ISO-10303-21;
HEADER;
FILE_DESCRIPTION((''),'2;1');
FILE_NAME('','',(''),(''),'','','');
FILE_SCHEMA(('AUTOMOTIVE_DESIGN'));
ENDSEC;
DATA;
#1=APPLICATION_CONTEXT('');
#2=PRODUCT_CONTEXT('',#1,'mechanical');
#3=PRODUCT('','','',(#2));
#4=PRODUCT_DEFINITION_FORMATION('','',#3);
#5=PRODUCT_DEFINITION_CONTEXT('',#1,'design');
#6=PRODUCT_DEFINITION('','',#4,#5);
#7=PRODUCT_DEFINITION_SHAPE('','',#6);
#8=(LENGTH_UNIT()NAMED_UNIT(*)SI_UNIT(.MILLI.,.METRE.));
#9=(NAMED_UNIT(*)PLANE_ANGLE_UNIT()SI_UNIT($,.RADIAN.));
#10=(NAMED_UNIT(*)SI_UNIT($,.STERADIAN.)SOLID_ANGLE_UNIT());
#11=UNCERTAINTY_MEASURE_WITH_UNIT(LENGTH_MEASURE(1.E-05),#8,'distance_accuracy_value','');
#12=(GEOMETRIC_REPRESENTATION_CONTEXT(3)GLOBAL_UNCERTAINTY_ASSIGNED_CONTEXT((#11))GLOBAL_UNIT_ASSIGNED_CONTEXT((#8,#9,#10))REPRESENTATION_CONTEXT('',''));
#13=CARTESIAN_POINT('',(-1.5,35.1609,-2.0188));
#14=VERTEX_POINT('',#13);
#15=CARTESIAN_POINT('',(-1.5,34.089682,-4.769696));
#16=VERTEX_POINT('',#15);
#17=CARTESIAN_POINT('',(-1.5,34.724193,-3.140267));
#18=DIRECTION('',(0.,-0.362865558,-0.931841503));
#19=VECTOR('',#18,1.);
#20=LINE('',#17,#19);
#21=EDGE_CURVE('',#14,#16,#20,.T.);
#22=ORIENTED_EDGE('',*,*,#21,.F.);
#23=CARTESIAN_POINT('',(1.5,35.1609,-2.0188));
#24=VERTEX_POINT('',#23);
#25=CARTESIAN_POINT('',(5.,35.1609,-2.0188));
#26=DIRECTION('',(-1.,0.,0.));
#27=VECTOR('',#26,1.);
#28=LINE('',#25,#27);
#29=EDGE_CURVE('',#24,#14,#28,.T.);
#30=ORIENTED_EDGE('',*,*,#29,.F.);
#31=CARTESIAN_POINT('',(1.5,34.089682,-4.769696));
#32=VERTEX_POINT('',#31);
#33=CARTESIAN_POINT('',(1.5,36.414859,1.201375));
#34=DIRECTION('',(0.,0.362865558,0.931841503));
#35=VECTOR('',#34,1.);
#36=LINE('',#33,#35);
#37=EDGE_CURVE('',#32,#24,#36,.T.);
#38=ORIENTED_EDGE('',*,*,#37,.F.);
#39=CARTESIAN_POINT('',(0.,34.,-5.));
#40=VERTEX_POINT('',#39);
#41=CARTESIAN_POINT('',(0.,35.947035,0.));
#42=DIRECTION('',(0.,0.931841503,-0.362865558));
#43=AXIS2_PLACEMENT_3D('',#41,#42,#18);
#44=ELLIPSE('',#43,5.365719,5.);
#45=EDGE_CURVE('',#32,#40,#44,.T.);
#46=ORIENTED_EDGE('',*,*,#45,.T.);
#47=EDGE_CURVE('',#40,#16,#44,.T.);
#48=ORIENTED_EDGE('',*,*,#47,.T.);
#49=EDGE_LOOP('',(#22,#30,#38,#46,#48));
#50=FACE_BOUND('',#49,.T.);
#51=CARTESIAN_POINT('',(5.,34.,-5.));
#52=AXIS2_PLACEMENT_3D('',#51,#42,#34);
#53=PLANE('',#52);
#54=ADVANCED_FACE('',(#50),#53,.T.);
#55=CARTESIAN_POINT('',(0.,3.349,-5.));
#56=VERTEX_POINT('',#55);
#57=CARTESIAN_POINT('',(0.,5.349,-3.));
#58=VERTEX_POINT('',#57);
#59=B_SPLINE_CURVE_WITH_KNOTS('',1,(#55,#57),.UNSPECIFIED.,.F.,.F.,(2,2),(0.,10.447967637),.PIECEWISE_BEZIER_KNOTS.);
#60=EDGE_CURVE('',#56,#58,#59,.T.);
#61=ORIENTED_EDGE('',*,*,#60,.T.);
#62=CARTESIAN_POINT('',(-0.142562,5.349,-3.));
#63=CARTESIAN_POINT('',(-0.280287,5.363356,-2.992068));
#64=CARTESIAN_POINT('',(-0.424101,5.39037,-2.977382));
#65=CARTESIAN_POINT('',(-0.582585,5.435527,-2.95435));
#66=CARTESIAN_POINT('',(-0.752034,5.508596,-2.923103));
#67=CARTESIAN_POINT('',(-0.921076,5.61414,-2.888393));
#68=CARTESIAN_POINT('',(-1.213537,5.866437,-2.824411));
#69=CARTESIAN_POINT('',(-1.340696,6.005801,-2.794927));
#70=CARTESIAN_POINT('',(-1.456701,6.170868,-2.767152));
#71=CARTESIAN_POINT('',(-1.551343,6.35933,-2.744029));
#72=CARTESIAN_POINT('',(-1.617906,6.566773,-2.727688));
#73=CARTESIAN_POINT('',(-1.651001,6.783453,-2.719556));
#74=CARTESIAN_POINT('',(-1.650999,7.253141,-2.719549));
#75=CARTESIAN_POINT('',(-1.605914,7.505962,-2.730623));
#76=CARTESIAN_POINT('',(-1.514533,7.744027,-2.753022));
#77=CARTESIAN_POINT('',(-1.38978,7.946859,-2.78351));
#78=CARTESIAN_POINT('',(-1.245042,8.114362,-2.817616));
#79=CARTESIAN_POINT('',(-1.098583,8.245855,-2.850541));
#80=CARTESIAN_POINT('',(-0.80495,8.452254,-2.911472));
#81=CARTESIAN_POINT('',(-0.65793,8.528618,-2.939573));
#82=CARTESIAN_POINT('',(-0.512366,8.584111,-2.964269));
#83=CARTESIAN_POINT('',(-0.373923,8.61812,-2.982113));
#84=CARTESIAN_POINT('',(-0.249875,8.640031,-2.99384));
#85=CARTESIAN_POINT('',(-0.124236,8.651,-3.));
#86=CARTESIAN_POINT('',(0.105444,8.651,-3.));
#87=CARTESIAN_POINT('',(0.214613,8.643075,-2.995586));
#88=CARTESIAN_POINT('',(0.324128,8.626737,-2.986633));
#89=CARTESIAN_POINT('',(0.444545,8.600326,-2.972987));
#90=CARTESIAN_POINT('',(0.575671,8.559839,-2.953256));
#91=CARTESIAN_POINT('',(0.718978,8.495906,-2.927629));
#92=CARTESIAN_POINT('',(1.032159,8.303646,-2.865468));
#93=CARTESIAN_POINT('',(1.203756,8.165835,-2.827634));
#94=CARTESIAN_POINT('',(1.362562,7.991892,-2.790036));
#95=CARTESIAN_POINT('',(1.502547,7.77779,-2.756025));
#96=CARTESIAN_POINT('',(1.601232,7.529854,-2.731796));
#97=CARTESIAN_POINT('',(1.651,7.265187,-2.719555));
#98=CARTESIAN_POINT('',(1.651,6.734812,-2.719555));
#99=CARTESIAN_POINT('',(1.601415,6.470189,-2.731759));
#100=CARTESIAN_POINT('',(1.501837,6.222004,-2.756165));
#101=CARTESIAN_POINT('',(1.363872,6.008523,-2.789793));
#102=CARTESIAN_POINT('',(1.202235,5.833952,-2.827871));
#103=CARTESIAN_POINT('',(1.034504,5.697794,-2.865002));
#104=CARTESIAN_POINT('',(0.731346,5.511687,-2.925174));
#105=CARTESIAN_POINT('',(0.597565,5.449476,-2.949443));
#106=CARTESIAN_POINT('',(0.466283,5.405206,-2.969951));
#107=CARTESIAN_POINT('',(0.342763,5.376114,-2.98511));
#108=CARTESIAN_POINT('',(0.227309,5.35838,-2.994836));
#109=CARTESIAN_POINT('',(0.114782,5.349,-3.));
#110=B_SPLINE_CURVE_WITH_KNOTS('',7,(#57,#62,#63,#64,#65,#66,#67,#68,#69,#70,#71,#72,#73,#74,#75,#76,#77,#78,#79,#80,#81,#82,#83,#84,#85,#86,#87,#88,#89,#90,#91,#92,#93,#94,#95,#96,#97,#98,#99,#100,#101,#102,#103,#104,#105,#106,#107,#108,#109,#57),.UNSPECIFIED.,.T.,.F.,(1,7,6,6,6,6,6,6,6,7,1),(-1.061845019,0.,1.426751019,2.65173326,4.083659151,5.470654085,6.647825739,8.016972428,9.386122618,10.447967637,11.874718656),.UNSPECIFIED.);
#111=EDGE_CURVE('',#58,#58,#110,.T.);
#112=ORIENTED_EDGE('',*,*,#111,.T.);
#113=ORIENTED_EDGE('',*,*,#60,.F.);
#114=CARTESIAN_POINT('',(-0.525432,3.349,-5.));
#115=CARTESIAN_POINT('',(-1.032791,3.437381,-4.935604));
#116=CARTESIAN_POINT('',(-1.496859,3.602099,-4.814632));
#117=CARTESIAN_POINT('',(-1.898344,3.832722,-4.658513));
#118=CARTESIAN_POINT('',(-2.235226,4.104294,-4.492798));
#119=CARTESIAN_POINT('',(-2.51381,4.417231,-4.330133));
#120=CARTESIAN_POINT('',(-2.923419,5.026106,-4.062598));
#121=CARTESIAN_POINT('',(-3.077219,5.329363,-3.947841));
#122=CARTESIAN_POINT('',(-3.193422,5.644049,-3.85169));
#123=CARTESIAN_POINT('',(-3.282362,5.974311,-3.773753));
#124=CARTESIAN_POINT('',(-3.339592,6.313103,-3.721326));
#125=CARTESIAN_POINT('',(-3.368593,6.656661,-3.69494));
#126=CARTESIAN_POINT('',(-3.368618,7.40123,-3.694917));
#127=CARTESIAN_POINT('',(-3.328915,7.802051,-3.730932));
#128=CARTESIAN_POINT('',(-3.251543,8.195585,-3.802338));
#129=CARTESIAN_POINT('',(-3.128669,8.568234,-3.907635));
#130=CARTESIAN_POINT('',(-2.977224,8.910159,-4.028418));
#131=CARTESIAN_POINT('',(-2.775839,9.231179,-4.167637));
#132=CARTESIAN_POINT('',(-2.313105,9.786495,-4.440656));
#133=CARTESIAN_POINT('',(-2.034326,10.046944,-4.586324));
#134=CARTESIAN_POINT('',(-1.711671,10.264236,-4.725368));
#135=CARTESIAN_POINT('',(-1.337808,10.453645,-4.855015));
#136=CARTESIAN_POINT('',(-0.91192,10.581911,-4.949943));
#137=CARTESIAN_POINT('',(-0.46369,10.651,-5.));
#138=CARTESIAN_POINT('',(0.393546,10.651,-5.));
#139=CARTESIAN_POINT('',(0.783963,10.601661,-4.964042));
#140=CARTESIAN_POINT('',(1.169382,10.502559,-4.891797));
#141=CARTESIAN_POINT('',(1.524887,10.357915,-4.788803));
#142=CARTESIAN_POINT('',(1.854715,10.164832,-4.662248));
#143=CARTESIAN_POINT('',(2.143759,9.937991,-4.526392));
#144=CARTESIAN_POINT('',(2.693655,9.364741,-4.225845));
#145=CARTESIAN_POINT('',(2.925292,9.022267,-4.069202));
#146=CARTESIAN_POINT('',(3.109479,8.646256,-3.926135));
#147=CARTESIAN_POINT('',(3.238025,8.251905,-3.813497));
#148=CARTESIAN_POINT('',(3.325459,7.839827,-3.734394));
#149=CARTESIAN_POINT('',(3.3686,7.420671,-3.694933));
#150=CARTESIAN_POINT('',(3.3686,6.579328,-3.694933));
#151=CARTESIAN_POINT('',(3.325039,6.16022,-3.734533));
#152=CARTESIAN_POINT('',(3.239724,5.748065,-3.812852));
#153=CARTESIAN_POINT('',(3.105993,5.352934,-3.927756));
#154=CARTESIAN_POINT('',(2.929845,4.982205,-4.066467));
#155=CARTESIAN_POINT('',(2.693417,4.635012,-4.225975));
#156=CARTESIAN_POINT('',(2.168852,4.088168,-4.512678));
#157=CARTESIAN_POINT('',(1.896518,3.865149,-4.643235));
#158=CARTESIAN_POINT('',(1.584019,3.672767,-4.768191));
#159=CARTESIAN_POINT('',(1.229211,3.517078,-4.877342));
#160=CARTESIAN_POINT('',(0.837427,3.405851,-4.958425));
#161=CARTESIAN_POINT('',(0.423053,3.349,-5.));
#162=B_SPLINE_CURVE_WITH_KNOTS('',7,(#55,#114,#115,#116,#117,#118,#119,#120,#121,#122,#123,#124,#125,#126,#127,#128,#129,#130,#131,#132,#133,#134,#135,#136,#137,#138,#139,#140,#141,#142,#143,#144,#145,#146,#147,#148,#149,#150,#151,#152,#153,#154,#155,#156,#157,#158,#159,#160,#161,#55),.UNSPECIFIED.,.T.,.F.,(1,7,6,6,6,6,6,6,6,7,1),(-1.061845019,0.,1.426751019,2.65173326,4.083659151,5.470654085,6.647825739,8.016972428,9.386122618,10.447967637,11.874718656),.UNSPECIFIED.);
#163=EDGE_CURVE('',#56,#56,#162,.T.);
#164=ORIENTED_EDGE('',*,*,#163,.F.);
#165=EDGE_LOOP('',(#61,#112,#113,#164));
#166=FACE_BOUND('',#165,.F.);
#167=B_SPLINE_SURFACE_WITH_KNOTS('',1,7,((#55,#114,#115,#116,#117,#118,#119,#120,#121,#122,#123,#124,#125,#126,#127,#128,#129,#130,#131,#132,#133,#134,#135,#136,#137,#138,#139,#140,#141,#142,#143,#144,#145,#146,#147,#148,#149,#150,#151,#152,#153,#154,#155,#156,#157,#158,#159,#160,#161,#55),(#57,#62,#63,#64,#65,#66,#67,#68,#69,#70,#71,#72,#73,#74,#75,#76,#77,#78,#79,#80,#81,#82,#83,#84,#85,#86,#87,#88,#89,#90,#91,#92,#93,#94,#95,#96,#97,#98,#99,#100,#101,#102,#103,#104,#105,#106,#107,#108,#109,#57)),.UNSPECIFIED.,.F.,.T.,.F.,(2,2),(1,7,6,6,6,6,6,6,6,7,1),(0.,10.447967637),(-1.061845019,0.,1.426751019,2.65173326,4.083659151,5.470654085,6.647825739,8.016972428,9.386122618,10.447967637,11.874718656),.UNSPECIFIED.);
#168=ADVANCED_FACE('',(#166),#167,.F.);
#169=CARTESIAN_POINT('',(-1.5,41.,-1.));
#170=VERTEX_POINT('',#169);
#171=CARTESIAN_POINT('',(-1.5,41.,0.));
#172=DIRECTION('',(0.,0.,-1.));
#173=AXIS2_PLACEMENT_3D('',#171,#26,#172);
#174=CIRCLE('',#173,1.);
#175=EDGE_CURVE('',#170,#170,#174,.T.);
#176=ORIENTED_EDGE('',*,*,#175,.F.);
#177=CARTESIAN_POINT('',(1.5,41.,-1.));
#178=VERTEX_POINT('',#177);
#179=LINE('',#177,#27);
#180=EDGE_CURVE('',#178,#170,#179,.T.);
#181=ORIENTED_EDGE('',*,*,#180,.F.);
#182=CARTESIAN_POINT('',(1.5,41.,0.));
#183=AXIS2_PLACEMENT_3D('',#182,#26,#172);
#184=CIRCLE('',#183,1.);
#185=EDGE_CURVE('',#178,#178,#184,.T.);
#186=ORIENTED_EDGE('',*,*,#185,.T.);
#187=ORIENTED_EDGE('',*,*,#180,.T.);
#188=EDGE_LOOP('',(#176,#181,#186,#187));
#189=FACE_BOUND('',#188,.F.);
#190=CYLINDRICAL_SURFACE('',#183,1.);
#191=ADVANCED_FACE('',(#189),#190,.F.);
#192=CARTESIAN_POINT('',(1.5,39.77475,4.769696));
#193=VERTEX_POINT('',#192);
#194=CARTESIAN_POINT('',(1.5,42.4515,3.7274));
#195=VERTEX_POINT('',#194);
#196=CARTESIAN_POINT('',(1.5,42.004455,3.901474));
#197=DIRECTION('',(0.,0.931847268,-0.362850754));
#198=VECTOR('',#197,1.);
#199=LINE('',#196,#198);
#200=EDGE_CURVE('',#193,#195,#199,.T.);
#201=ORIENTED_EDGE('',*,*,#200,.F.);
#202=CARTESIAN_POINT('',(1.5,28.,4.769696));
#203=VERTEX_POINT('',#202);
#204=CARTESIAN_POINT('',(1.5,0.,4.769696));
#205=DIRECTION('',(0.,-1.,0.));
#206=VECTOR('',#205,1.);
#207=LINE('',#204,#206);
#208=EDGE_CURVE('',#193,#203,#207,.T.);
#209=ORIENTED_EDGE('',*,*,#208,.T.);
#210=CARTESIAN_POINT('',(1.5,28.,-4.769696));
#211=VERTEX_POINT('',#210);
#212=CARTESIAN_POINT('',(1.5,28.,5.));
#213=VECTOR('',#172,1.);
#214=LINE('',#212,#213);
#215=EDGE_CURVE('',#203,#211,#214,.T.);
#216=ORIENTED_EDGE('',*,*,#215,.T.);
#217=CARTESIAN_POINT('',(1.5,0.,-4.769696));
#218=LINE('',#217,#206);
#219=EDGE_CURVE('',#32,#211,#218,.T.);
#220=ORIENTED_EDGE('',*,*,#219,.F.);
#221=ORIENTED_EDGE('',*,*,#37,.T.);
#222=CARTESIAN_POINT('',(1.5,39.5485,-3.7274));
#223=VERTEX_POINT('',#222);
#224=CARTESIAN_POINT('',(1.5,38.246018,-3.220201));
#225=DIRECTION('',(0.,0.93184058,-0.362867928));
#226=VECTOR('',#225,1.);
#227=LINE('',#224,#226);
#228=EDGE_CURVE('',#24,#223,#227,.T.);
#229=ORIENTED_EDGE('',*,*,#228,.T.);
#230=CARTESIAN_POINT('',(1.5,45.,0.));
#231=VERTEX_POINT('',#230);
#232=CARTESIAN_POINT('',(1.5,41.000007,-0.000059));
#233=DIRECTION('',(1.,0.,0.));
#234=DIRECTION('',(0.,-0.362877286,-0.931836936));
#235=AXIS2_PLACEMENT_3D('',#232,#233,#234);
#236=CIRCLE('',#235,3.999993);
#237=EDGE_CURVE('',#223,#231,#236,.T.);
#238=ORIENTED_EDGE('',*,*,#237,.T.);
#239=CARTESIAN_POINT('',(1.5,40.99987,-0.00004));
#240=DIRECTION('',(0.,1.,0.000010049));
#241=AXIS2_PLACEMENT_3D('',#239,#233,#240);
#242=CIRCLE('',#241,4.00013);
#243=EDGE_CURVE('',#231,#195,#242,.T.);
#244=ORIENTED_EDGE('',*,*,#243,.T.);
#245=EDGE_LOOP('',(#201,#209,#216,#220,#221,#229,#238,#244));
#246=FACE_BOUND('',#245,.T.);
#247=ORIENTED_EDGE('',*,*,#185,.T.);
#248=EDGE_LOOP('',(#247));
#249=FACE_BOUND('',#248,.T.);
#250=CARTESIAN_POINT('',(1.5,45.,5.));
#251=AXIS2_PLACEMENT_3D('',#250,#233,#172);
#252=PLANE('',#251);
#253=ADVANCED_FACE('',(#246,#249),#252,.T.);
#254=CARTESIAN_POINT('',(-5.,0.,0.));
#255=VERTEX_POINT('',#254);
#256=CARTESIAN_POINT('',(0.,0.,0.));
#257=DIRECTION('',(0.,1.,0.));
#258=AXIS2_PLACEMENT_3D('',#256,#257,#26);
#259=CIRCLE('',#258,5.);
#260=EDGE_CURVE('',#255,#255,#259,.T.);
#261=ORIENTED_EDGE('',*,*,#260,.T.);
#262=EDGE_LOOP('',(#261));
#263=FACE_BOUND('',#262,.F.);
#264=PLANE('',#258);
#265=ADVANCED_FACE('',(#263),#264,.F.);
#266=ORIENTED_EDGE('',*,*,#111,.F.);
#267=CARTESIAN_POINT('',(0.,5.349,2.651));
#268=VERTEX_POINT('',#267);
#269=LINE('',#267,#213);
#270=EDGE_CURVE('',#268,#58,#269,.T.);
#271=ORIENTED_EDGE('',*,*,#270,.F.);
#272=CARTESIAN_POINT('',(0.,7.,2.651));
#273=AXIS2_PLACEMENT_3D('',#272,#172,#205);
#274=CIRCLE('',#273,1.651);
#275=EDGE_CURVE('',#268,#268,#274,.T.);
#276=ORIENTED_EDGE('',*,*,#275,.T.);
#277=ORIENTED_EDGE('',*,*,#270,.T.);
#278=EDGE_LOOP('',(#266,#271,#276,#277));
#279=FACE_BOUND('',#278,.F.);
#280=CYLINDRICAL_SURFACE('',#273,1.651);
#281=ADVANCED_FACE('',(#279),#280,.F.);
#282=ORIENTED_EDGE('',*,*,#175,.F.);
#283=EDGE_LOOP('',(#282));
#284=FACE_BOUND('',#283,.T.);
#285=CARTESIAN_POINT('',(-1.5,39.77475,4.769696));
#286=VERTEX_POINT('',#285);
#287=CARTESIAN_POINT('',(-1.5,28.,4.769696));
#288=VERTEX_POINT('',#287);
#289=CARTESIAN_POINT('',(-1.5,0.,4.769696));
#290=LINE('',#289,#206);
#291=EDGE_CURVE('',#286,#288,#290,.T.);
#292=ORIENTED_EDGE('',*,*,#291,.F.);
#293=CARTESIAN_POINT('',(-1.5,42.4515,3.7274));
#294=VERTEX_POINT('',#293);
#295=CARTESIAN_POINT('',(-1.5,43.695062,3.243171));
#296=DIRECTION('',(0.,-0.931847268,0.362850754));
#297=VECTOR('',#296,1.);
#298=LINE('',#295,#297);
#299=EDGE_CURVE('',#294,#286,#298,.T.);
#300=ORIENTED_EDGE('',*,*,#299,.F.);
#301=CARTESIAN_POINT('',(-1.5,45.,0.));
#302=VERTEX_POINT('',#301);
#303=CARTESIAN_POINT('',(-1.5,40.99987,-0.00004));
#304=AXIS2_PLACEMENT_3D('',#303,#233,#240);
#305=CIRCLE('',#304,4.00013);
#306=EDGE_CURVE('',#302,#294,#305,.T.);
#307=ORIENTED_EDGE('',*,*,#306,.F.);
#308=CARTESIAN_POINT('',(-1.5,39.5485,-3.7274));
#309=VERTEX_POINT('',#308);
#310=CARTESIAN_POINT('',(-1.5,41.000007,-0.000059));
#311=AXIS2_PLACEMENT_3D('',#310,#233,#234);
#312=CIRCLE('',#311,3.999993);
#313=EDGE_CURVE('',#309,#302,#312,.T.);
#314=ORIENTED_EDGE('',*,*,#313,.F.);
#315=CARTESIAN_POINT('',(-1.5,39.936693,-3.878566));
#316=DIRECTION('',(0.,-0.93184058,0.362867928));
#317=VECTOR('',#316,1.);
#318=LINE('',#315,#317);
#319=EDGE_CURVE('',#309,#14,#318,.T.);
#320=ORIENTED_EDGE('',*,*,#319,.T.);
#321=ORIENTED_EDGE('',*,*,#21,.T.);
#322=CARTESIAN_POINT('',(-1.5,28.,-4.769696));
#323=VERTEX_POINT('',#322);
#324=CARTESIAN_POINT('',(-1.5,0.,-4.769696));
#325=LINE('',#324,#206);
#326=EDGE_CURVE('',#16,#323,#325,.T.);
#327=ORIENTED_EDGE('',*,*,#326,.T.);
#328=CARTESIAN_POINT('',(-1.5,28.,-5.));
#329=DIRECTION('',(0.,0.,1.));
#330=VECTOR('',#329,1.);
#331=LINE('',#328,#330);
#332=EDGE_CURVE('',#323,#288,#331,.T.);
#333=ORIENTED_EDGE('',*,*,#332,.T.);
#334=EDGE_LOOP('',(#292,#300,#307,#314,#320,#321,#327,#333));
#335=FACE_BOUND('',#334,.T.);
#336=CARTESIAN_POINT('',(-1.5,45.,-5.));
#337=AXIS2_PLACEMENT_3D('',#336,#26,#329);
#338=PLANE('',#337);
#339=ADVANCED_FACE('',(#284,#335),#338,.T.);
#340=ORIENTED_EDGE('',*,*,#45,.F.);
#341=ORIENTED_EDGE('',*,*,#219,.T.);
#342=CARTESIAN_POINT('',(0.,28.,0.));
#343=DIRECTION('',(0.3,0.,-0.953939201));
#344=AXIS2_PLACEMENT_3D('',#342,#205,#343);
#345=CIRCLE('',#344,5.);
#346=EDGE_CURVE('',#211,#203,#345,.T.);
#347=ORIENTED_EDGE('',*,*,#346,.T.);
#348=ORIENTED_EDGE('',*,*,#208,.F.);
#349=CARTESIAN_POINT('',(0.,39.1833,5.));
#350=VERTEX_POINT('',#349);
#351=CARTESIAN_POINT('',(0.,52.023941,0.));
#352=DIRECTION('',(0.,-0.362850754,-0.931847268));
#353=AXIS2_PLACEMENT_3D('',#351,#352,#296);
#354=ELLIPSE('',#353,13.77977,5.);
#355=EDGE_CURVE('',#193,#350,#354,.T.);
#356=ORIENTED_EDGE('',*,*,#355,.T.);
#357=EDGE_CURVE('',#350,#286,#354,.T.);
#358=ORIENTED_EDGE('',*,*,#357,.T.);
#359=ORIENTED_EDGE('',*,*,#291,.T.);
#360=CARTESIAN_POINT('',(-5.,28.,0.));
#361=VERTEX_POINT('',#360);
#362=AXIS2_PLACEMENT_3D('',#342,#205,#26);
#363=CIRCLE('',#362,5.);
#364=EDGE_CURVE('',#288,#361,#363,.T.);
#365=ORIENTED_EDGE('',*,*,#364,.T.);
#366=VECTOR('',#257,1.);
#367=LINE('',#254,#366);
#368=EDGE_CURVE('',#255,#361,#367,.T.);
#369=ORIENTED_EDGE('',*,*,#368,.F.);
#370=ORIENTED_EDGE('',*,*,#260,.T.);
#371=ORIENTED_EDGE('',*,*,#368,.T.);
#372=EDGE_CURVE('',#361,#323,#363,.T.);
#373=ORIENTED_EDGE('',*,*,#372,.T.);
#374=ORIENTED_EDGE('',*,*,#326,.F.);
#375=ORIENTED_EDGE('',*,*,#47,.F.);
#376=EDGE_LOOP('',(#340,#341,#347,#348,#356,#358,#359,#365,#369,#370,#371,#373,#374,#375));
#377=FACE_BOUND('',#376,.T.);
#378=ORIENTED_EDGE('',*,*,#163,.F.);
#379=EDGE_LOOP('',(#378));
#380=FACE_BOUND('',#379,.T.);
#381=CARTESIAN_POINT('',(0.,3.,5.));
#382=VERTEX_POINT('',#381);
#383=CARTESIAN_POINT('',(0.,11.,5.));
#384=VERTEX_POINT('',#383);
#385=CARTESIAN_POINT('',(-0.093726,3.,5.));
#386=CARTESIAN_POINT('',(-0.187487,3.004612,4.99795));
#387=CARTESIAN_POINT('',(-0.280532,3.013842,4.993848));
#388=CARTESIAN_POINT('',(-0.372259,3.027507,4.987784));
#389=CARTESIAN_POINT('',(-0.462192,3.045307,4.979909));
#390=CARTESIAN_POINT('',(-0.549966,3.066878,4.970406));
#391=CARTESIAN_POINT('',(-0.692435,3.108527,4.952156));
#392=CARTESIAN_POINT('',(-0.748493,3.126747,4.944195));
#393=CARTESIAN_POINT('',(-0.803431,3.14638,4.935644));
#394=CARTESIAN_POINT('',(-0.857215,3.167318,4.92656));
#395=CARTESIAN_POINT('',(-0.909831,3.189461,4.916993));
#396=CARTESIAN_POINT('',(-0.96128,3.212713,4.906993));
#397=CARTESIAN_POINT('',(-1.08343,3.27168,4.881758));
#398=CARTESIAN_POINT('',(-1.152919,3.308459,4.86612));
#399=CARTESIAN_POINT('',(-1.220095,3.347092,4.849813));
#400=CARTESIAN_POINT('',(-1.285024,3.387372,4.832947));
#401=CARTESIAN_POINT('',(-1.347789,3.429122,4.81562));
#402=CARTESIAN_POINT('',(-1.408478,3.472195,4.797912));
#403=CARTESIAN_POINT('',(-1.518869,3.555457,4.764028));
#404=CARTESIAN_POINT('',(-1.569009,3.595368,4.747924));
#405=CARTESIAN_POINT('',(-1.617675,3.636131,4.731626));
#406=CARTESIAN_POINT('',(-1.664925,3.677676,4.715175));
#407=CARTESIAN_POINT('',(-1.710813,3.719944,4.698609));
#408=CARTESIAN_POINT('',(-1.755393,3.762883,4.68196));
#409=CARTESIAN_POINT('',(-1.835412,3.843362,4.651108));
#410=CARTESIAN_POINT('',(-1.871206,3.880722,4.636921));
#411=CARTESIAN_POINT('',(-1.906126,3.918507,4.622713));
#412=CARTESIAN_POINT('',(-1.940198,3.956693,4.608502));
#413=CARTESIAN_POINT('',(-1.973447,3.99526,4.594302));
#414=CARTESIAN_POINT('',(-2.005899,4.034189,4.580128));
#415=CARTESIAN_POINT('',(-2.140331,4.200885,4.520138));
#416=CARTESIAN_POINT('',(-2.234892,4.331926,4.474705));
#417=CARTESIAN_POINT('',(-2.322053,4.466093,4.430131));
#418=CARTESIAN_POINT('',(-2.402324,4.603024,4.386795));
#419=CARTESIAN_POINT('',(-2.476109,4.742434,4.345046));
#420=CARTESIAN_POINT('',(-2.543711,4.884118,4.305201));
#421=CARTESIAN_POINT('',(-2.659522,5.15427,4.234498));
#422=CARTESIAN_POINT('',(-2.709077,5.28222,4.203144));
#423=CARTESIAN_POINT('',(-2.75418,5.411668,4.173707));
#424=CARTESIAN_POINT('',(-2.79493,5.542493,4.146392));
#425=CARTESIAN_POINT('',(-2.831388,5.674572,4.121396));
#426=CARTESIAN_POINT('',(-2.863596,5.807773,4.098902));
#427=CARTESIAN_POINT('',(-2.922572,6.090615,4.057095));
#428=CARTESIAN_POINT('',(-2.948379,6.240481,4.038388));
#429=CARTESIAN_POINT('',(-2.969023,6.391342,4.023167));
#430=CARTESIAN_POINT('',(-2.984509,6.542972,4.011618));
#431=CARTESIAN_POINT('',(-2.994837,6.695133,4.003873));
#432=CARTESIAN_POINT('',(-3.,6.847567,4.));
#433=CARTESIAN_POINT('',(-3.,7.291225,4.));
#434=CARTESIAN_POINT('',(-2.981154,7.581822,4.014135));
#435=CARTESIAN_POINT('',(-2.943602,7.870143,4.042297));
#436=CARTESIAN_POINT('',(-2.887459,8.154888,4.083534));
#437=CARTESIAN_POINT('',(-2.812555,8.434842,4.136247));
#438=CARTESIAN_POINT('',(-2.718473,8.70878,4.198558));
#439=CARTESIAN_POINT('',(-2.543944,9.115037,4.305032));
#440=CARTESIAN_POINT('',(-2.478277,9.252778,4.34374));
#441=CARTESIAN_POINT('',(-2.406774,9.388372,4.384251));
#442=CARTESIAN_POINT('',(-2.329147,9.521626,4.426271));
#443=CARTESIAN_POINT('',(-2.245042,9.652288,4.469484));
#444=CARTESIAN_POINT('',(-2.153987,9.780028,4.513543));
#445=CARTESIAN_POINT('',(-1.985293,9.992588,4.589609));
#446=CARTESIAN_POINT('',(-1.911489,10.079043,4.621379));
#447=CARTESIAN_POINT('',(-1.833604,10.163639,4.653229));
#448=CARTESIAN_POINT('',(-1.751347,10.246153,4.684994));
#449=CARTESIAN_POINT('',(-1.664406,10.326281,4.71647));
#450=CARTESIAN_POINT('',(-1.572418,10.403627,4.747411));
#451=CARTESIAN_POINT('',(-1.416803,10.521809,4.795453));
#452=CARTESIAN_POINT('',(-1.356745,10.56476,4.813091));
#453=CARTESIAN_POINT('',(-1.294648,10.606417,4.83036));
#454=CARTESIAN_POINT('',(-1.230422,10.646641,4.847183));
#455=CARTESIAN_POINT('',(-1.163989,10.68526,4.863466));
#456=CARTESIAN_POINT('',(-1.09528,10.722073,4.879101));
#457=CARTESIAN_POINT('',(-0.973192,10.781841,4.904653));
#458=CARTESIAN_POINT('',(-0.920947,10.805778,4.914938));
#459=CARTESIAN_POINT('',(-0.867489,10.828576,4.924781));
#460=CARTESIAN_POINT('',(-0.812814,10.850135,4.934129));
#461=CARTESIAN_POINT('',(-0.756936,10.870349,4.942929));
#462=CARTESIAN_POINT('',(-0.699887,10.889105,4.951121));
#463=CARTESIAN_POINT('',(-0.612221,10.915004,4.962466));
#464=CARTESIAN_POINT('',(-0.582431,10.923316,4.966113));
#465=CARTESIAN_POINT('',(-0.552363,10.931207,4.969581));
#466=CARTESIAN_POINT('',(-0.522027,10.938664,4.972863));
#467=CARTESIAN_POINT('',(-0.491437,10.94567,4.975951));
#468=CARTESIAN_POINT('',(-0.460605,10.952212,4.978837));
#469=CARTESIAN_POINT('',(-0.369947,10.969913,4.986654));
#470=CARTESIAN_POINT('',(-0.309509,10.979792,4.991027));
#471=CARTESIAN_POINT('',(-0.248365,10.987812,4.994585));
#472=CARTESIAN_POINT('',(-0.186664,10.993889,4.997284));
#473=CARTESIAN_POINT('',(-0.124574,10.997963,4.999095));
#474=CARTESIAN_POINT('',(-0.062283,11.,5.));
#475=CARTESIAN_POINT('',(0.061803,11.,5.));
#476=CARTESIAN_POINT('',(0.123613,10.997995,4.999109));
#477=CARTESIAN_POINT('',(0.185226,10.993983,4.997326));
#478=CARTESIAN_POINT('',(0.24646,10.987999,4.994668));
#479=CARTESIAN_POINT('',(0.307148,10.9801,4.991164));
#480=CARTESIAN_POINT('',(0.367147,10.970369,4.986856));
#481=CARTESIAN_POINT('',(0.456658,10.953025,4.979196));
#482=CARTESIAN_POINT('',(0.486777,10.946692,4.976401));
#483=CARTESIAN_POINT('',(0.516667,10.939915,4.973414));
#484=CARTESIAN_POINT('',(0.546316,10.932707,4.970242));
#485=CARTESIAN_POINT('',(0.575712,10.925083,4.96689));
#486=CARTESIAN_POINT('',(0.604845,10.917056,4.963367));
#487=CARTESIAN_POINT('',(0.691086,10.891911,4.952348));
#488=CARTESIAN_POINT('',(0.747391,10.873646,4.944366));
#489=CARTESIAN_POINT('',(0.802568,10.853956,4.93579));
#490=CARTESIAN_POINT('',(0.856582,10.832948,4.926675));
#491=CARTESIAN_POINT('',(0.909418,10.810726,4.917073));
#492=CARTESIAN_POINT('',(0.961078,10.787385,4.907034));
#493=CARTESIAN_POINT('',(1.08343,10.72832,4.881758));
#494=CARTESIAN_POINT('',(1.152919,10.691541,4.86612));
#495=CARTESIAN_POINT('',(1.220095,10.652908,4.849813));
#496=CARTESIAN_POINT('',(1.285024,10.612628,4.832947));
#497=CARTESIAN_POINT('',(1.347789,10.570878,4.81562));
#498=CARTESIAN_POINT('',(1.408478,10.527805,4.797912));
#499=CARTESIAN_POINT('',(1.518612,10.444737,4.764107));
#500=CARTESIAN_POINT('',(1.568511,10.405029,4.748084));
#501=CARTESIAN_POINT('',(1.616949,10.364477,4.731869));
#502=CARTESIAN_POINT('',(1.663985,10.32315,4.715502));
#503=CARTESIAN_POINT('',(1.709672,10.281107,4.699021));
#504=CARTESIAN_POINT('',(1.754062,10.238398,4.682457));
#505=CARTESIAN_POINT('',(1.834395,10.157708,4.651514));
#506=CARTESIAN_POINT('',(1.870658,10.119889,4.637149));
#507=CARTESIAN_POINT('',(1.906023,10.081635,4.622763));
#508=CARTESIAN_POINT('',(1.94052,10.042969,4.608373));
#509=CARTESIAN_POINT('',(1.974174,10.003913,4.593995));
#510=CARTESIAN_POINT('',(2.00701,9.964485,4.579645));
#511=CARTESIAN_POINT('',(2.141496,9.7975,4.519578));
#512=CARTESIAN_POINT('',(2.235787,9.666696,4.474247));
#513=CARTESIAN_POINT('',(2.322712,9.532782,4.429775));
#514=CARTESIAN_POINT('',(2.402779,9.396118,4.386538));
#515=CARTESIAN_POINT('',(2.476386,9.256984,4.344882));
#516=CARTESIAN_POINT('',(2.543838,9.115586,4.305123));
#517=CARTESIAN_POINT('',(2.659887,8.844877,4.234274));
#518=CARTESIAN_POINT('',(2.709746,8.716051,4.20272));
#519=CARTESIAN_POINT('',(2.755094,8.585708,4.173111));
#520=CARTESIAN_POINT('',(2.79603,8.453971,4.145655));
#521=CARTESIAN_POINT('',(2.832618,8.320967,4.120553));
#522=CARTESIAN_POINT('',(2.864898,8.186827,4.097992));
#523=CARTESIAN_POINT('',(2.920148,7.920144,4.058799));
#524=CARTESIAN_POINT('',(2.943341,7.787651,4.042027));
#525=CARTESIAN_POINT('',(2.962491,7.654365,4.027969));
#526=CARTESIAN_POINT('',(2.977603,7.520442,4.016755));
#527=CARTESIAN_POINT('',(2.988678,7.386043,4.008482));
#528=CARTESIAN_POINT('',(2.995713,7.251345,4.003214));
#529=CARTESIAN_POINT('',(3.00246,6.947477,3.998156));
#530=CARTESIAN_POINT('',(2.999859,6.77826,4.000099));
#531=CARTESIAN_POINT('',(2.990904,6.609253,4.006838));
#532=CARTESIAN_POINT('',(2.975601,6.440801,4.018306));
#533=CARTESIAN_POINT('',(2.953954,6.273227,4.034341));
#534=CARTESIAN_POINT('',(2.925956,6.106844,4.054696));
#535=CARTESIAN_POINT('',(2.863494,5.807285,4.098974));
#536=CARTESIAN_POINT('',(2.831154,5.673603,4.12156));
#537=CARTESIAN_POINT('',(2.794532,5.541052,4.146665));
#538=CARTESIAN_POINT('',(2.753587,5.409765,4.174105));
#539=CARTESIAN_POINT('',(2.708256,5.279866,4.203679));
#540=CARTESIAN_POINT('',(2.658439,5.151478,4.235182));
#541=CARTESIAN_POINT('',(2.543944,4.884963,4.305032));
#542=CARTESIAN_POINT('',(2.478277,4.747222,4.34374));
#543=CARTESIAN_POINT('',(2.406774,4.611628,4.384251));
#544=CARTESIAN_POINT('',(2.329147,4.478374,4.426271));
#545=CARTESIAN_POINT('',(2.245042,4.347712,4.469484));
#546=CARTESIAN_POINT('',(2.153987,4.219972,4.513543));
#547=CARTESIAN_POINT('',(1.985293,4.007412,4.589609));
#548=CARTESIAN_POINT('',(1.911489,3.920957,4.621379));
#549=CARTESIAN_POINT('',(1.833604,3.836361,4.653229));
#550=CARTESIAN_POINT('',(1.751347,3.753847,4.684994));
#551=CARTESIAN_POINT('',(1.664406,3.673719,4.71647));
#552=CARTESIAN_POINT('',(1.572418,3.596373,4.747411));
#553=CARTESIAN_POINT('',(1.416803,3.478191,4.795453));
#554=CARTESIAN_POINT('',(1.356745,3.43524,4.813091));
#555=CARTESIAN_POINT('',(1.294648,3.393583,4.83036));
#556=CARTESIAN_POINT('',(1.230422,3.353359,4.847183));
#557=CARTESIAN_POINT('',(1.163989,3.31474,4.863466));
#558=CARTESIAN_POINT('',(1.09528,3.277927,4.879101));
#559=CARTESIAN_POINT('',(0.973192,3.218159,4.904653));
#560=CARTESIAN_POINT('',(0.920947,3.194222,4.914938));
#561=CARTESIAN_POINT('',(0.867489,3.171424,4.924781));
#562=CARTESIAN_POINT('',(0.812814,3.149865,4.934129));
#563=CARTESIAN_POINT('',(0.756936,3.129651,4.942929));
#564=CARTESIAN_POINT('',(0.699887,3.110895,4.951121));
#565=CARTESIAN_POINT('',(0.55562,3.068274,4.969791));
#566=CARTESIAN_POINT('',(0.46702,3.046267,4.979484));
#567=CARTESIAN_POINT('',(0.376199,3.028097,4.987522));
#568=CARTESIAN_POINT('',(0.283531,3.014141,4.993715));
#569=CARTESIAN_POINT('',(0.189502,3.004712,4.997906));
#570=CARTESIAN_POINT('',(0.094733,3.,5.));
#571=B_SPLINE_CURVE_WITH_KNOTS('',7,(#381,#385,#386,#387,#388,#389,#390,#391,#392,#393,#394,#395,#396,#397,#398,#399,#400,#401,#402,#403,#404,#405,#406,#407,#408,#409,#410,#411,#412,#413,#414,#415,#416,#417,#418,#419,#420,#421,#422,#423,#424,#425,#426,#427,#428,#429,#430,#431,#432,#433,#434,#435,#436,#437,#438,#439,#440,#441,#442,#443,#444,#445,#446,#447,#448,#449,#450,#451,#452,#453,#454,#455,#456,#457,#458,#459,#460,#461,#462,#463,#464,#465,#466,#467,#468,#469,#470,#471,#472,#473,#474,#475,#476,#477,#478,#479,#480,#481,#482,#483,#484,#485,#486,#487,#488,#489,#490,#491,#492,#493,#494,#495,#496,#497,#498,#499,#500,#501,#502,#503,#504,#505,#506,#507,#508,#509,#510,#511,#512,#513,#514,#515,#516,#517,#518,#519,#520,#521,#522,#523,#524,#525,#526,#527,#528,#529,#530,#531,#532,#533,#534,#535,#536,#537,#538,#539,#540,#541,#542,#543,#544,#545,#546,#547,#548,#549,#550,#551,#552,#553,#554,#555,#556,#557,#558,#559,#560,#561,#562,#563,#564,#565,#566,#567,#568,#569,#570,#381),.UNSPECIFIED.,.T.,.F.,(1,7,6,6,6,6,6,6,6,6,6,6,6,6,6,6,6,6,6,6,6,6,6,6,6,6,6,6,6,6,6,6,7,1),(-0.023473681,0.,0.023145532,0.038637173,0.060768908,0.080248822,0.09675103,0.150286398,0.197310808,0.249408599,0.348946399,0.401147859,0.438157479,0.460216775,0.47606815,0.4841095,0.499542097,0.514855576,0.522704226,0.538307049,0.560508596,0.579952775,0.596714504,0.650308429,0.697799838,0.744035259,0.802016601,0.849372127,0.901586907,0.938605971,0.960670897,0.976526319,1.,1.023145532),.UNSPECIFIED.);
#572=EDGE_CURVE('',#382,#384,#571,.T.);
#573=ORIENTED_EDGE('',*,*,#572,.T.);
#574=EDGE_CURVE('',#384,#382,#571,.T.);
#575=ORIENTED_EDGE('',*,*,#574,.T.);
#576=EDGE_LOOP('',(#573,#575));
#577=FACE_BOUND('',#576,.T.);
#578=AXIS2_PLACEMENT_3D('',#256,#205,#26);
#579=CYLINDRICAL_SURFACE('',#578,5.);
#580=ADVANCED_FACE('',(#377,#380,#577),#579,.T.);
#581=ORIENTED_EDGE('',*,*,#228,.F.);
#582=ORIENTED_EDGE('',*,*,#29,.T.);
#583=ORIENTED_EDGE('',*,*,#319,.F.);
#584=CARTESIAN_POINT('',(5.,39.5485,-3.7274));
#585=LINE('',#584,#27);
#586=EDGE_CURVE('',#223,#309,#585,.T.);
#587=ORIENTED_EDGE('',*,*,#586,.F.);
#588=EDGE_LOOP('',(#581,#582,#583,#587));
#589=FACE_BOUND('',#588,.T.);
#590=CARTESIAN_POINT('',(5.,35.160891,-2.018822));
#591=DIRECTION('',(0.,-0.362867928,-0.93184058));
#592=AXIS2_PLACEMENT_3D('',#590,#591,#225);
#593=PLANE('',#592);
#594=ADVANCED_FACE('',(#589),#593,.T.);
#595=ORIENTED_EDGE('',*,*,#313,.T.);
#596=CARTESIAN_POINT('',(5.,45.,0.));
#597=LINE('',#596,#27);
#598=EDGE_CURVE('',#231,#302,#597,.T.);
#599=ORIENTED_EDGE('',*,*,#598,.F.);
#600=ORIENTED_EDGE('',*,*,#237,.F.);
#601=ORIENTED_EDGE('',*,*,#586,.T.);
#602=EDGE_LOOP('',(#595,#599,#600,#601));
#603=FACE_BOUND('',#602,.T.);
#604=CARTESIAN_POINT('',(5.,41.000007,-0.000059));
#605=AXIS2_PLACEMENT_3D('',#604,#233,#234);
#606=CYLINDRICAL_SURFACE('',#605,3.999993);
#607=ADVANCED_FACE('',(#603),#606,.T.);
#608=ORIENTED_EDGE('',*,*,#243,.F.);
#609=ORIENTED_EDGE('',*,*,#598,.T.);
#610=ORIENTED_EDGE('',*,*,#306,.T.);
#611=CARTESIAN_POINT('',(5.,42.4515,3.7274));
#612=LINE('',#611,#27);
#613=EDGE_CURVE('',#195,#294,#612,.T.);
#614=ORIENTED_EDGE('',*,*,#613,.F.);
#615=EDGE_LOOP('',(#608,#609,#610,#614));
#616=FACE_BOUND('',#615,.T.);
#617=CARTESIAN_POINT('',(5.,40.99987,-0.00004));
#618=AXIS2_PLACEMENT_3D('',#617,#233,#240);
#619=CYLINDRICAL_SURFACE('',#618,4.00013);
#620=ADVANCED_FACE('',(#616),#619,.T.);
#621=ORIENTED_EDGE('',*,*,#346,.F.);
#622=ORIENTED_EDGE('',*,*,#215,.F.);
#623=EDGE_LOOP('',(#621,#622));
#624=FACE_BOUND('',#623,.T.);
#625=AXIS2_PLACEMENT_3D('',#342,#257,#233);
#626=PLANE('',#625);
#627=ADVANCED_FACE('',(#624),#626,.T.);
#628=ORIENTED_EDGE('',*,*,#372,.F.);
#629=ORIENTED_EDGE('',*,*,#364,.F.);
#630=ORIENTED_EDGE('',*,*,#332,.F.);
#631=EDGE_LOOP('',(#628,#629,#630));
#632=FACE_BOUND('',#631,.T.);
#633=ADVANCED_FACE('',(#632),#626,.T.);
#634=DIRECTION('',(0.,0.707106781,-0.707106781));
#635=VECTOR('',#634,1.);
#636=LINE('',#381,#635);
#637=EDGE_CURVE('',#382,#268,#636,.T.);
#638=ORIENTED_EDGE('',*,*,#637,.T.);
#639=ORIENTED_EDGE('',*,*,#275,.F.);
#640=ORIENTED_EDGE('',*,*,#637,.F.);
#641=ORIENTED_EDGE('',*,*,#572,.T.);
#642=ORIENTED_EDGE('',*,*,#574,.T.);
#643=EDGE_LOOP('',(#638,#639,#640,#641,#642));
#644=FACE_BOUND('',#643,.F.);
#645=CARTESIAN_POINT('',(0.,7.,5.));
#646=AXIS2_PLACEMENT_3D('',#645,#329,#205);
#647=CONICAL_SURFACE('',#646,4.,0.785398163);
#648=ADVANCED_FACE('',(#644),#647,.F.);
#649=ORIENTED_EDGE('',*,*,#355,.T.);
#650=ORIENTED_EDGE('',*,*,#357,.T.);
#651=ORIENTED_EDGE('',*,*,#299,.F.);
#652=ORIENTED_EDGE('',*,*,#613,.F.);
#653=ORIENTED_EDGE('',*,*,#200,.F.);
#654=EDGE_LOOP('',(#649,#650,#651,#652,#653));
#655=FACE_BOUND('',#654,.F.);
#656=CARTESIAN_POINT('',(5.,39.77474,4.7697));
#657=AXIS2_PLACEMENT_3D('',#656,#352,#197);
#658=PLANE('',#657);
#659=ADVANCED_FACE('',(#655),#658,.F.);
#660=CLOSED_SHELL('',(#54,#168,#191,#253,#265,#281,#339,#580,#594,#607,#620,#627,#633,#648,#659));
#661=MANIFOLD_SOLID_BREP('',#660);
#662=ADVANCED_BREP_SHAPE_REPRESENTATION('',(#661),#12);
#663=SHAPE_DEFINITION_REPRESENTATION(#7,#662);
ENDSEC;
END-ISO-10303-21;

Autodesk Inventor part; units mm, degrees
ref_plane "XZ Plane" through (0, 0, 0) normal (0, 1, 0) x (-1, 0, 0)
sketch "Sketch1" plane through (0, 0, 0) normal (0, 1, 0) x (-1, 0, 0)
  circle A0 centre (0, 0) radius 5
  dimension "d0" = 10
extrude "Extrusion1" add sketch "Sketch1" along normal blind 45
ref_plane "Work Plane1" through (0, 0, 5) normal (0, 0, 1) x (1, 0, 0)
sketch "Sketch2" plane through (0, 0, 5) normal (0, 0, 1) x (1, 0, 0)
  point P0 (0, 0)
  point P1 (0, 7)
  dimension "d3" = 7
hole "Hole1" at (0, 7, 5) direction (0, 0, -1) diameter 3.302 end through all countersink diameter 8 countersink angle 90 thread size "8-32 UNC" class "2B" standard "ANSI Unified Screw Threads"
sketch "Sketch5" plane through (0, 45, 0) normal (0, 1, 0) x (1, 0, 0)
  line L0 (-5, 5) -> (-1.5, 5)
  line L1 (-1.5, 5) -> (-1.5, -5)
  line L2 (-1.5, -5) -> (-5, -5)
  line L3 (-5, -5) -> (-5, 5)
  line L4 (1.5, 5) -> (5, 5)
  line L5 (5, 5) -> (5, -5)
  line L6 (5, -5) -> (1.5, -5)
  line L7 (1.5, -5) -> (1.5, 5)
  point P0 (0, 0)
  point P1 (-5, 0)
  point P2 (1.5, 0)
  point P3 (5, 0)
  point P4 (-1.5, 0)
  dimension "d16" = 3
  dimension "d17" = 10
  dimension "d18" = 10
  dimension "d27" = 5
extrude "Extrusion2" cut sketch "Sketch5" against normal blind 17
sketch "Sketch6" plane through (1.5, 45, 4.7697) normal (1, 0, 0) x (0, 0, -1)
  circle A0 centre (4.7697, -4) radius 1
  line L0 (0, 0) -> (9.5394, 0) projected
  line L1 (0, -17) -> (0, 0) projected
  line L2 (0, -17) -> (9.5394, -17) projected
  line L3 (9.5394, 0) -> (0, 0) projected
  line L4 (9.5394, 0) -> (9.5394, -17) projected
  line L5 (4.7697, 0) -> (4.7697, -17)
  point P0 (4.7697, -45)
  dimension "d32" = 2
  dimension "d33" = 4
hole "Hole2" at (1.5, 41, 0) direction (-1, 0, 0) diameter 2 end through all
ref_plane "Work Plane3" through (5, 0, 0) normal (1, 0, 0) x (0, 1, 0)
sketch "Sketch10" plane through (5, 0, 0) normal (1, 0, 0) x (0, 1, 0)
  arc A0 (39.5485, -3.7274) -> (45, 0) centre (41, 0) ccw
  circle A1 centre (41, 0) radius 1 projected
  line L0 (28, 0.7697) -> (39.5485, -3.7274)
  line L1 (28, 4.7697) -> (28, -4.7697) projected
  line L2 (28, 4.7697) -> (45, 4.7697) projected
  line L3 (45, -5) -> (45, -4.7697) projected
  line L4 (34, -5) -> (45, -5)
  line L5 (45, 4.7697) -> (45, 5) projected
  line L6 (45, -5) -> (45, 5)
  line L7 (45, 5) -> (39.1833, 5)
  line L8 (39.1833, 5) -> (42.4515, 3.7274)
  line L9 (45, 4.7697) -> (28, 4.7697) projected
  line L10 (0, 5) -> (45, 5) projected
  line L11 (34, -5) -> (35.1609, -2.0188)
  arc A2 (45, 0) -> (42.4515, 3.7274) centre (41, 0) ccw
  point P0 (0, 0)
  point P1 (45, -4.7697)
  dimension "d54" = 8
  dimension "d55" = 6
  dimension "d56" = 4
extrude "Extrusion3" cut sketch "Sketch10" against normal through all contours A0 L6 L3 L4 L11 L0 | A2 L8 L2 L6 | L2 L8 L7 L5
chamfer "Chamfer1" distance 2 angle 45 1 edges at (-0.2563, 8.631, -4.9934)
properties part number "barrel_hinge-male" material "Stainless Steel"
